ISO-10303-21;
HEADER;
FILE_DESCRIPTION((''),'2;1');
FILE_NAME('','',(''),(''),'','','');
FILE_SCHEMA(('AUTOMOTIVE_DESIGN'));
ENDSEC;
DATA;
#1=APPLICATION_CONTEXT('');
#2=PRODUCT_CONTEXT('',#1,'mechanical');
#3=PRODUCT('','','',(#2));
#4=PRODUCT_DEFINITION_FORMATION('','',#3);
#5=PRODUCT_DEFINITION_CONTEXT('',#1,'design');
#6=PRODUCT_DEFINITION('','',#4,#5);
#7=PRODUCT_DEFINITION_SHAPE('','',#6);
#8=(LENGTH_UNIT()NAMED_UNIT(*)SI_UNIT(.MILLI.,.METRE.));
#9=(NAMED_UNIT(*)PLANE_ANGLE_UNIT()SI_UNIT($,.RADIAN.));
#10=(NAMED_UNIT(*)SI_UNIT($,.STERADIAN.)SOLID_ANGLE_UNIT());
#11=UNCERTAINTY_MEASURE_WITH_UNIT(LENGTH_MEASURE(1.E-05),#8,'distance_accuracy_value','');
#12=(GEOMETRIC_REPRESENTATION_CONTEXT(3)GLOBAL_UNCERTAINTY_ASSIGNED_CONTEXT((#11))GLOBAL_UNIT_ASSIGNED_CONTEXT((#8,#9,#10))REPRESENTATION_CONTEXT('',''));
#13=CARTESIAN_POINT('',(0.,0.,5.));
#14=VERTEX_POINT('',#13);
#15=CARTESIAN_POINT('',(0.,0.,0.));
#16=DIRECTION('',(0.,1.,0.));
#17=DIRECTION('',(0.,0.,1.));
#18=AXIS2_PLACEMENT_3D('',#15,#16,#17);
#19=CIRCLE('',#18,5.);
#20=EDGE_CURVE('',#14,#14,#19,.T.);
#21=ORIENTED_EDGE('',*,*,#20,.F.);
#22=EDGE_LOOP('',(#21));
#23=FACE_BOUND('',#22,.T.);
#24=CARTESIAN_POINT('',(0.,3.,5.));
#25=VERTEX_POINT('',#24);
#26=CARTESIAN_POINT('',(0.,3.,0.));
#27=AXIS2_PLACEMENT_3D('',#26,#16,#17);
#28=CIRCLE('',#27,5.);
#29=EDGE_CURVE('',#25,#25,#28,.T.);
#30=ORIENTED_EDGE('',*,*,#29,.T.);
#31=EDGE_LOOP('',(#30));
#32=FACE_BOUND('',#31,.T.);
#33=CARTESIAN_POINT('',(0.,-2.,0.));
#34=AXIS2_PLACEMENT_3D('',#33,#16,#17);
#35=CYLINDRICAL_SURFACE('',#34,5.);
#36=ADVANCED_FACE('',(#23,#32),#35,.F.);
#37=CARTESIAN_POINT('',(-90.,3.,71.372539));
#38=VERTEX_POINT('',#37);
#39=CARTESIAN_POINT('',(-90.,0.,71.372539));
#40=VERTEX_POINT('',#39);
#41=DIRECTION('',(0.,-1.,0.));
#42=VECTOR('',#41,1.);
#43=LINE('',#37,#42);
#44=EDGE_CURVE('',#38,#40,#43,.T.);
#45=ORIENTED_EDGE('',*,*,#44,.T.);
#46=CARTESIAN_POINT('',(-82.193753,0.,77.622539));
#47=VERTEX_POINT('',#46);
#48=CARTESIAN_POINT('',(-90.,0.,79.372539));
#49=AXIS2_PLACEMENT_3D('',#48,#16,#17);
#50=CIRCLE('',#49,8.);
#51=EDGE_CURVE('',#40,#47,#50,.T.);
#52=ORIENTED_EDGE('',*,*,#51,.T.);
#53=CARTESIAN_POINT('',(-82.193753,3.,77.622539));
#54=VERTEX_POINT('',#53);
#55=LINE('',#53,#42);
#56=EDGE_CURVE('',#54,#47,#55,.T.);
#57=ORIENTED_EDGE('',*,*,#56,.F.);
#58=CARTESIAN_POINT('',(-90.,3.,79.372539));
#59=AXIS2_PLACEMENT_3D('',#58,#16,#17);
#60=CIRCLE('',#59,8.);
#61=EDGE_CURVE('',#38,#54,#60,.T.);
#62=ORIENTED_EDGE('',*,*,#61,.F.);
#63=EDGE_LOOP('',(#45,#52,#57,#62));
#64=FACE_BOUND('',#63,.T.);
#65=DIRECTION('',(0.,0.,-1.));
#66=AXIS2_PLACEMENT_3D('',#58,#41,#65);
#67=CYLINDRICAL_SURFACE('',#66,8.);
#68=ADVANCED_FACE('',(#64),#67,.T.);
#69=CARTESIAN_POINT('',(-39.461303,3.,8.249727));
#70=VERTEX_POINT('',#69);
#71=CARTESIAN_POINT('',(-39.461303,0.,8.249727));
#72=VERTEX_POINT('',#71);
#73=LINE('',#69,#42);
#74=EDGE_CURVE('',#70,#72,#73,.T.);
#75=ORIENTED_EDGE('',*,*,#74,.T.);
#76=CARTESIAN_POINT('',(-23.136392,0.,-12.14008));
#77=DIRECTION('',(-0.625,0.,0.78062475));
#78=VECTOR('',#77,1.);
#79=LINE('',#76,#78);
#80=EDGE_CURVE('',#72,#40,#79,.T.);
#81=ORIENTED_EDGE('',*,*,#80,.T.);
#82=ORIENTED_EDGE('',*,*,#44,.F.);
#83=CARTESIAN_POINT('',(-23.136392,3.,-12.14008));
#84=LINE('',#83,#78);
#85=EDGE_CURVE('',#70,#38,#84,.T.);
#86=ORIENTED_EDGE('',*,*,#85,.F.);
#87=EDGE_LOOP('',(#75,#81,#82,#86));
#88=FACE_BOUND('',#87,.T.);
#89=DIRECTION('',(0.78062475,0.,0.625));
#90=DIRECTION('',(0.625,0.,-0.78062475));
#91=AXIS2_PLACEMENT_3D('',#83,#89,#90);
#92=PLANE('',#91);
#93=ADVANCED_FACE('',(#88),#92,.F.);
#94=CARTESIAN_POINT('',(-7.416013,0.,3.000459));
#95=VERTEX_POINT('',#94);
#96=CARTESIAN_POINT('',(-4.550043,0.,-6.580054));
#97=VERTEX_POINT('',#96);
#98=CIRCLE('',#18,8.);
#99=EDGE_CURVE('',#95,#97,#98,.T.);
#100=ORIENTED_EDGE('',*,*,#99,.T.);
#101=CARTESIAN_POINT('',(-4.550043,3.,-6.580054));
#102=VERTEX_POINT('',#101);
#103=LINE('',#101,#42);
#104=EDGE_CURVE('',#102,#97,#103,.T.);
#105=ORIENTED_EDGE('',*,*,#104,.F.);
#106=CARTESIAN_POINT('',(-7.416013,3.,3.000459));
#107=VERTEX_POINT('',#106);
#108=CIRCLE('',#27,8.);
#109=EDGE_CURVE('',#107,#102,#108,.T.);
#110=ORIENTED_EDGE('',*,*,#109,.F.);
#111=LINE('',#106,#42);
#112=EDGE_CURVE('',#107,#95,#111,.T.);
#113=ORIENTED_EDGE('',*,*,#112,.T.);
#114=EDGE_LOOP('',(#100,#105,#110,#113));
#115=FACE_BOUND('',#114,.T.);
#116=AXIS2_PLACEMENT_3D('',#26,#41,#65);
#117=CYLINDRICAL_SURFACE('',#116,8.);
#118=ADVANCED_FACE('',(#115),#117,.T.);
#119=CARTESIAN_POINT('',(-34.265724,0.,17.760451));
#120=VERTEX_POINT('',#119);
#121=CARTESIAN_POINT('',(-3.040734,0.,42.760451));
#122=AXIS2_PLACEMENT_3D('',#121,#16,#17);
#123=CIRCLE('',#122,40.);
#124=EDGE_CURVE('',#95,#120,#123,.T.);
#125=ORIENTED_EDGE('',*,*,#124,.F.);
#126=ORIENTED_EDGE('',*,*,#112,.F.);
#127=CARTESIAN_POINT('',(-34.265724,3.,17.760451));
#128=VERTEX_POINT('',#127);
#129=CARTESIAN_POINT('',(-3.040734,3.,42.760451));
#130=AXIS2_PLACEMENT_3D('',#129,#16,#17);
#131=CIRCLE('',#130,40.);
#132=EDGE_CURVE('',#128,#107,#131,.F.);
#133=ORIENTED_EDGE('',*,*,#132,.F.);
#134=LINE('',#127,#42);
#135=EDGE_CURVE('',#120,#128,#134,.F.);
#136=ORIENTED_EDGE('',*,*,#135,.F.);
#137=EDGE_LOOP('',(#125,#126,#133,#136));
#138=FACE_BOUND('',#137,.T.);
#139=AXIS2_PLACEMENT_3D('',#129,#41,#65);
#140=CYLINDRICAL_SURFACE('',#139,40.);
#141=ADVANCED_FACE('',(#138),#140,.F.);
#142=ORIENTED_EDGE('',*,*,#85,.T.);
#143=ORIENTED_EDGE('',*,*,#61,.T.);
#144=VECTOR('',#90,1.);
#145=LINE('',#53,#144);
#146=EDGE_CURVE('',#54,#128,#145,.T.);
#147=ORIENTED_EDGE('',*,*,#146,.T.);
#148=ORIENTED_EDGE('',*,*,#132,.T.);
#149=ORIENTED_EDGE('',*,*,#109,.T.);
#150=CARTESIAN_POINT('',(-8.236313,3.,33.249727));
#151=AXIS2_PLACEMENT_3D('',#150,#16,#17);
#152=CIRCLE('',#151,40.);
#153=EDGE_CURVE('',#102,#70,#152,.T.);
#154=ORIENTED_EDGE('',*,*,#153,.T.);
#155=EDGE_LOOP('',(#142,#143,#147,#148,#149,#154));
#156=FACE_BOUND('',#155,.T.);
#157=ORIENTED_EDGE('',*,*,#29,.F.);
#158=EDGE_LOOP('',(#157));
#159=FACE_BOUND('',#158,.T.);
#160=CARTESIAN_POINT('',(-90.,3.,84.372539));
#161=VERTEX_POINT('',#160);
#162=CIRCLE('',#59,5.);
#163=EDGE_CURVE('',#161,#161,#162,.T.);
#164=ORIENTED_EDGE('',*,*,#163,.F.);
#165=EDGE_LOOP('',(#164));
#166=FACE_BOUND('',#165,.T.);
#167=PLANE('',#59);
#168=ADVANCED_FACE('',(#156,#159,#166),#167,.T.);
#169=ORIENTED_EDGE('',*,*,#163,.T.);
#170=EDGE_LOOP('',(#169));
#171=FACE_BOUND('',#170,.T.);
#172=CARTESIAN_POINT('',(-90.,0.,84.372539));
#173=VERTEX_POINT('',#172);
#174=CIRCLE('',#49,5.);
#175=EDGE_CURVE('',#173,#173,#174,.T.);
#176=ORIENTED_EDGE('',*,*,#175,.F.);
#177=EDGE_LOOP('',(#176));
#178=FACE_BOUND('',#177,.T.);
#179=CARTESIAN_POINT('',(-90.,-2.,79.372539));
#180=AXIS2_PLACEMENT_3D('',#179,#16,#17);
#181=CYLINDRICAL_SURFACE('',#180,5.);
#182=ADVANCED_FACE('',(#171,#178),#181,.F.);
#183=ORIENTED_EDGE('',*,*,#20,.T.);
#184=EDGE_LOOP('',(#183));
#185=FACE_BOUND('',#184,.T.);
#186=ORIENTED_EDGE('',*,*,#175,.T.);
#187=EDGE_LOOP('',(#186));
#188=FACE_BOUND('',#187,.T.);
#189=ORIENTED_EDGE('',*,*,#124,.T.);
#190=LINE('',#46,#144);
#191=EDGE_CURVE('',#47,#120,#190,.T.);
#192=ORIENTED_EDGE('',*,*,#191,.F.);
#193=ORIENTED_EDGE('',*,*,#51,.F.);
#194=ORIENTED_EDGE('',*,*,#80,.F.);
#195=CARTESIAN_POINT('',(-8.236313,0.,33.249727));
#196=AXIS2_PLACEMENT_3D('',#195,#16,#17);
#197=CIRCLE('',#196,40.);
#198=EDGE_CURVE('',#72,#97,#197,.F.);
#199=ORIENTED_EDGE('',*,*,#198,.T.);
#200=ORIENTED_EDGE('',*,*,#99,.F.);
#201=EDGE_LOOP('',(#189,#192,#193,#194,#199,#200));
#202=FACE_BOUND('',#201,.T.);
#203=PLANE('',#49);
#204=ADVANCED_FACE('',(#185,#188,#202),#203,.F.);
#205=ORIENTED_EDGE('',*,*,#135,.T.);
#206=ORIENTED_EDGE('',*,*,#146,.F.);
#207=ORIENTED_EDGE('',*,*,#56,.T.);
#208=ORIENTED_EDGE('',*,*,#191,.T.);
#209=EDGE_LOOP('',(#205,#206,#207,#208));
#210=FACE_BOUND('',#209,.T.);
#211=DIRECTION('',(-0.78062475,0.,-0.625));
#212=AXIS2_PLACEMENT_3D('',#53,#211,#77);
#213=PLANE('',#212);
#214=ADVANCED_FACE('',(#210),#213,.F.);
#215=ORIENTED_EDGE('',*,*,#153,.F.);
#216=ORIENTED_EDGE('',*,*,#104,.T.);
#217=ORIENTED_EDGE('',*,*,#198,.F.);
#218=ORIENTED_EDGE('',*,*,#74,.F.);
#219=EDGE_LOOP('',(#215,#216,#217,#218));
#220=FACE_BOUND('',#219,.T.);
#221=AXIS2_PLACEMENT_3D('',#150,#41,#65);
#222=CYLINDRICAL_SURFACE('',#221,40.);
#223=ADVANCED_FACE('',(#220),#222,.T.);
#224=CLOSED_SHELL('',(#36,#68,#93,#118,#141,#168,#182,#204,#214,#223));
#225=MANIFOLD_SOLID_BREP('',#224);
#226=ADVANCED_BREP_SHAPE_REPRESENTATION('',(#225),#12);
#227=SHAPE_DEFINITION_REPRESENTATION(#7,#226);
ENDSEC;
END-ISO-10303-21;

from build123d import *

# Parameters (mm, degrees)
EXTRUDE_1_DEPTH     = 3
FILLET_1_R          = 40
SKETCH_2_R          = 5
CUT_EXTRUDE_1_DEPTH = 5
SKETCH_3_R          = 5
CUT_EXTRUDE_2_DEPTH = 5


with BuildPart() as part:
    # 草图1 → 凸台-拉伸1 (new body)
    with BuildSketch(Plane(origin=(0, 0, 0), x_dir=(1, 0, 0), z_dir=(0, 1, 0))):
        with BuildLine():
            Line((-23.136391963, 12.14008034), (-4.550043431, 6.580053554))
            ThreePointArc((-4.550043431, 6.580053554), (7.664409986, -2.292775515), (-7.416012825, -3.000458929))
            Line((-7.416012825, -3.000458929), (-19.543612326, 0.627460668))
            Line((-19.543612326, 0.627460668), (-82.193752502, -77.622539332))
            ThreePointArc((-82.193752502, -77.622539332), (-95, -85.61753733), (-90, -71.372539332))
            Line((-90, -71.372539332), (-23.136391963, 12.14008034))
        make_face()
    extrude(amount=EXTRUDE_1_DEPTH)

    # 圆角1
    # the kernel refuses this fillet: 40 mm, written as the material it adds along each edge
    with BuildSketch(Plane(origin=(-19.543612326, 0, -0.627460668), x_dir=(0.9580512482944434, 0, 0.2865969393441921), z_dir=(0, 1, 0))) as fillet_1_piece_1:
        with BuildLine():
            CenterArc((28.245446023, -36.838167986), FILLET_1_R, 112.934019548, 45.038121995)
            Line((-8.834618101, -21.835873341), (-9.576219383, -21.535827448))
            Line((-9.576219383, -21.535827448), (-0.741601282, 0.300045893))
            Line((-0.741601282, 0.300045893), (0, 0.8))
            ThreePointArc((0, 0.8), (6.329306247, 0.8), (12.346875823, 0.73676336))
            Line((12.346875823, 0.73676336), (12.658612494, 0))
        make_face()
    extrude(amount=3)
    # the kernel refuses this fillet: 40 mm, written as the material it takes off along each edge
    with BuildSketch(Plane(origin=(-23.136391963, -65.299644029, -12.14008034), x_dir=(0.9580512482944434, 0, 0.2865969393441925), z_dir=(0, 1, 0))) as fillet_1_2_piece_1:
        with BuildLine():
            CenterArc((27.283619124, -39.215444523), FILLET_1_R, 101.366634115, 56.605507428)
            Line((-9.796444999, -24.213149878), (-10.538046282, -23.913103985))
            Line((-10.538046282, -23.913103985), (-0.741601282, 0.300045893))
            Line((-0.741601282, 0.300045893), (0, 0.8))
            ThreePointArc((0, 0.8), (9.700080536, 0.8), (19.24249191, 0.78430889))
            Line((19.24249191, 0.78430889), (19.400161071, 0))
        make_face()
    extrude(amount=133.599288058, mode=Mode.SUBTRACT)

    # 草图2 → 切除-拉伸1 (cut)
    with BuildSketch(Plane(origin=(0, 3, 0), x_dir=(1, 0, 0), z_dir=(0, 1, 0))):
        with Locations(Location((-90, -79.372539332, 0), (0, 0, 270))):
            Circle(SKETCH_2_R)
    extrude(amount=-CUT_EXTRUDE_1_DEPTH, mode=Mode.SUBTRACT)

    # 草图3 → 切除-拉伸2 (cut)
    with BuildSketch(Plane(origin=(0, 3, 0), x_dir=(1, 0, 0), z_dir=(0, 1, 0))):
        with Locations(Location((0, 0, 0), (0, 0, 270))):
            Circle(SKETCH_3_R)
    extrude(amount=-CUT_EXTRUDE_2_DEPTH, mode=Mode.SUBTRACT)


solid = part.part
